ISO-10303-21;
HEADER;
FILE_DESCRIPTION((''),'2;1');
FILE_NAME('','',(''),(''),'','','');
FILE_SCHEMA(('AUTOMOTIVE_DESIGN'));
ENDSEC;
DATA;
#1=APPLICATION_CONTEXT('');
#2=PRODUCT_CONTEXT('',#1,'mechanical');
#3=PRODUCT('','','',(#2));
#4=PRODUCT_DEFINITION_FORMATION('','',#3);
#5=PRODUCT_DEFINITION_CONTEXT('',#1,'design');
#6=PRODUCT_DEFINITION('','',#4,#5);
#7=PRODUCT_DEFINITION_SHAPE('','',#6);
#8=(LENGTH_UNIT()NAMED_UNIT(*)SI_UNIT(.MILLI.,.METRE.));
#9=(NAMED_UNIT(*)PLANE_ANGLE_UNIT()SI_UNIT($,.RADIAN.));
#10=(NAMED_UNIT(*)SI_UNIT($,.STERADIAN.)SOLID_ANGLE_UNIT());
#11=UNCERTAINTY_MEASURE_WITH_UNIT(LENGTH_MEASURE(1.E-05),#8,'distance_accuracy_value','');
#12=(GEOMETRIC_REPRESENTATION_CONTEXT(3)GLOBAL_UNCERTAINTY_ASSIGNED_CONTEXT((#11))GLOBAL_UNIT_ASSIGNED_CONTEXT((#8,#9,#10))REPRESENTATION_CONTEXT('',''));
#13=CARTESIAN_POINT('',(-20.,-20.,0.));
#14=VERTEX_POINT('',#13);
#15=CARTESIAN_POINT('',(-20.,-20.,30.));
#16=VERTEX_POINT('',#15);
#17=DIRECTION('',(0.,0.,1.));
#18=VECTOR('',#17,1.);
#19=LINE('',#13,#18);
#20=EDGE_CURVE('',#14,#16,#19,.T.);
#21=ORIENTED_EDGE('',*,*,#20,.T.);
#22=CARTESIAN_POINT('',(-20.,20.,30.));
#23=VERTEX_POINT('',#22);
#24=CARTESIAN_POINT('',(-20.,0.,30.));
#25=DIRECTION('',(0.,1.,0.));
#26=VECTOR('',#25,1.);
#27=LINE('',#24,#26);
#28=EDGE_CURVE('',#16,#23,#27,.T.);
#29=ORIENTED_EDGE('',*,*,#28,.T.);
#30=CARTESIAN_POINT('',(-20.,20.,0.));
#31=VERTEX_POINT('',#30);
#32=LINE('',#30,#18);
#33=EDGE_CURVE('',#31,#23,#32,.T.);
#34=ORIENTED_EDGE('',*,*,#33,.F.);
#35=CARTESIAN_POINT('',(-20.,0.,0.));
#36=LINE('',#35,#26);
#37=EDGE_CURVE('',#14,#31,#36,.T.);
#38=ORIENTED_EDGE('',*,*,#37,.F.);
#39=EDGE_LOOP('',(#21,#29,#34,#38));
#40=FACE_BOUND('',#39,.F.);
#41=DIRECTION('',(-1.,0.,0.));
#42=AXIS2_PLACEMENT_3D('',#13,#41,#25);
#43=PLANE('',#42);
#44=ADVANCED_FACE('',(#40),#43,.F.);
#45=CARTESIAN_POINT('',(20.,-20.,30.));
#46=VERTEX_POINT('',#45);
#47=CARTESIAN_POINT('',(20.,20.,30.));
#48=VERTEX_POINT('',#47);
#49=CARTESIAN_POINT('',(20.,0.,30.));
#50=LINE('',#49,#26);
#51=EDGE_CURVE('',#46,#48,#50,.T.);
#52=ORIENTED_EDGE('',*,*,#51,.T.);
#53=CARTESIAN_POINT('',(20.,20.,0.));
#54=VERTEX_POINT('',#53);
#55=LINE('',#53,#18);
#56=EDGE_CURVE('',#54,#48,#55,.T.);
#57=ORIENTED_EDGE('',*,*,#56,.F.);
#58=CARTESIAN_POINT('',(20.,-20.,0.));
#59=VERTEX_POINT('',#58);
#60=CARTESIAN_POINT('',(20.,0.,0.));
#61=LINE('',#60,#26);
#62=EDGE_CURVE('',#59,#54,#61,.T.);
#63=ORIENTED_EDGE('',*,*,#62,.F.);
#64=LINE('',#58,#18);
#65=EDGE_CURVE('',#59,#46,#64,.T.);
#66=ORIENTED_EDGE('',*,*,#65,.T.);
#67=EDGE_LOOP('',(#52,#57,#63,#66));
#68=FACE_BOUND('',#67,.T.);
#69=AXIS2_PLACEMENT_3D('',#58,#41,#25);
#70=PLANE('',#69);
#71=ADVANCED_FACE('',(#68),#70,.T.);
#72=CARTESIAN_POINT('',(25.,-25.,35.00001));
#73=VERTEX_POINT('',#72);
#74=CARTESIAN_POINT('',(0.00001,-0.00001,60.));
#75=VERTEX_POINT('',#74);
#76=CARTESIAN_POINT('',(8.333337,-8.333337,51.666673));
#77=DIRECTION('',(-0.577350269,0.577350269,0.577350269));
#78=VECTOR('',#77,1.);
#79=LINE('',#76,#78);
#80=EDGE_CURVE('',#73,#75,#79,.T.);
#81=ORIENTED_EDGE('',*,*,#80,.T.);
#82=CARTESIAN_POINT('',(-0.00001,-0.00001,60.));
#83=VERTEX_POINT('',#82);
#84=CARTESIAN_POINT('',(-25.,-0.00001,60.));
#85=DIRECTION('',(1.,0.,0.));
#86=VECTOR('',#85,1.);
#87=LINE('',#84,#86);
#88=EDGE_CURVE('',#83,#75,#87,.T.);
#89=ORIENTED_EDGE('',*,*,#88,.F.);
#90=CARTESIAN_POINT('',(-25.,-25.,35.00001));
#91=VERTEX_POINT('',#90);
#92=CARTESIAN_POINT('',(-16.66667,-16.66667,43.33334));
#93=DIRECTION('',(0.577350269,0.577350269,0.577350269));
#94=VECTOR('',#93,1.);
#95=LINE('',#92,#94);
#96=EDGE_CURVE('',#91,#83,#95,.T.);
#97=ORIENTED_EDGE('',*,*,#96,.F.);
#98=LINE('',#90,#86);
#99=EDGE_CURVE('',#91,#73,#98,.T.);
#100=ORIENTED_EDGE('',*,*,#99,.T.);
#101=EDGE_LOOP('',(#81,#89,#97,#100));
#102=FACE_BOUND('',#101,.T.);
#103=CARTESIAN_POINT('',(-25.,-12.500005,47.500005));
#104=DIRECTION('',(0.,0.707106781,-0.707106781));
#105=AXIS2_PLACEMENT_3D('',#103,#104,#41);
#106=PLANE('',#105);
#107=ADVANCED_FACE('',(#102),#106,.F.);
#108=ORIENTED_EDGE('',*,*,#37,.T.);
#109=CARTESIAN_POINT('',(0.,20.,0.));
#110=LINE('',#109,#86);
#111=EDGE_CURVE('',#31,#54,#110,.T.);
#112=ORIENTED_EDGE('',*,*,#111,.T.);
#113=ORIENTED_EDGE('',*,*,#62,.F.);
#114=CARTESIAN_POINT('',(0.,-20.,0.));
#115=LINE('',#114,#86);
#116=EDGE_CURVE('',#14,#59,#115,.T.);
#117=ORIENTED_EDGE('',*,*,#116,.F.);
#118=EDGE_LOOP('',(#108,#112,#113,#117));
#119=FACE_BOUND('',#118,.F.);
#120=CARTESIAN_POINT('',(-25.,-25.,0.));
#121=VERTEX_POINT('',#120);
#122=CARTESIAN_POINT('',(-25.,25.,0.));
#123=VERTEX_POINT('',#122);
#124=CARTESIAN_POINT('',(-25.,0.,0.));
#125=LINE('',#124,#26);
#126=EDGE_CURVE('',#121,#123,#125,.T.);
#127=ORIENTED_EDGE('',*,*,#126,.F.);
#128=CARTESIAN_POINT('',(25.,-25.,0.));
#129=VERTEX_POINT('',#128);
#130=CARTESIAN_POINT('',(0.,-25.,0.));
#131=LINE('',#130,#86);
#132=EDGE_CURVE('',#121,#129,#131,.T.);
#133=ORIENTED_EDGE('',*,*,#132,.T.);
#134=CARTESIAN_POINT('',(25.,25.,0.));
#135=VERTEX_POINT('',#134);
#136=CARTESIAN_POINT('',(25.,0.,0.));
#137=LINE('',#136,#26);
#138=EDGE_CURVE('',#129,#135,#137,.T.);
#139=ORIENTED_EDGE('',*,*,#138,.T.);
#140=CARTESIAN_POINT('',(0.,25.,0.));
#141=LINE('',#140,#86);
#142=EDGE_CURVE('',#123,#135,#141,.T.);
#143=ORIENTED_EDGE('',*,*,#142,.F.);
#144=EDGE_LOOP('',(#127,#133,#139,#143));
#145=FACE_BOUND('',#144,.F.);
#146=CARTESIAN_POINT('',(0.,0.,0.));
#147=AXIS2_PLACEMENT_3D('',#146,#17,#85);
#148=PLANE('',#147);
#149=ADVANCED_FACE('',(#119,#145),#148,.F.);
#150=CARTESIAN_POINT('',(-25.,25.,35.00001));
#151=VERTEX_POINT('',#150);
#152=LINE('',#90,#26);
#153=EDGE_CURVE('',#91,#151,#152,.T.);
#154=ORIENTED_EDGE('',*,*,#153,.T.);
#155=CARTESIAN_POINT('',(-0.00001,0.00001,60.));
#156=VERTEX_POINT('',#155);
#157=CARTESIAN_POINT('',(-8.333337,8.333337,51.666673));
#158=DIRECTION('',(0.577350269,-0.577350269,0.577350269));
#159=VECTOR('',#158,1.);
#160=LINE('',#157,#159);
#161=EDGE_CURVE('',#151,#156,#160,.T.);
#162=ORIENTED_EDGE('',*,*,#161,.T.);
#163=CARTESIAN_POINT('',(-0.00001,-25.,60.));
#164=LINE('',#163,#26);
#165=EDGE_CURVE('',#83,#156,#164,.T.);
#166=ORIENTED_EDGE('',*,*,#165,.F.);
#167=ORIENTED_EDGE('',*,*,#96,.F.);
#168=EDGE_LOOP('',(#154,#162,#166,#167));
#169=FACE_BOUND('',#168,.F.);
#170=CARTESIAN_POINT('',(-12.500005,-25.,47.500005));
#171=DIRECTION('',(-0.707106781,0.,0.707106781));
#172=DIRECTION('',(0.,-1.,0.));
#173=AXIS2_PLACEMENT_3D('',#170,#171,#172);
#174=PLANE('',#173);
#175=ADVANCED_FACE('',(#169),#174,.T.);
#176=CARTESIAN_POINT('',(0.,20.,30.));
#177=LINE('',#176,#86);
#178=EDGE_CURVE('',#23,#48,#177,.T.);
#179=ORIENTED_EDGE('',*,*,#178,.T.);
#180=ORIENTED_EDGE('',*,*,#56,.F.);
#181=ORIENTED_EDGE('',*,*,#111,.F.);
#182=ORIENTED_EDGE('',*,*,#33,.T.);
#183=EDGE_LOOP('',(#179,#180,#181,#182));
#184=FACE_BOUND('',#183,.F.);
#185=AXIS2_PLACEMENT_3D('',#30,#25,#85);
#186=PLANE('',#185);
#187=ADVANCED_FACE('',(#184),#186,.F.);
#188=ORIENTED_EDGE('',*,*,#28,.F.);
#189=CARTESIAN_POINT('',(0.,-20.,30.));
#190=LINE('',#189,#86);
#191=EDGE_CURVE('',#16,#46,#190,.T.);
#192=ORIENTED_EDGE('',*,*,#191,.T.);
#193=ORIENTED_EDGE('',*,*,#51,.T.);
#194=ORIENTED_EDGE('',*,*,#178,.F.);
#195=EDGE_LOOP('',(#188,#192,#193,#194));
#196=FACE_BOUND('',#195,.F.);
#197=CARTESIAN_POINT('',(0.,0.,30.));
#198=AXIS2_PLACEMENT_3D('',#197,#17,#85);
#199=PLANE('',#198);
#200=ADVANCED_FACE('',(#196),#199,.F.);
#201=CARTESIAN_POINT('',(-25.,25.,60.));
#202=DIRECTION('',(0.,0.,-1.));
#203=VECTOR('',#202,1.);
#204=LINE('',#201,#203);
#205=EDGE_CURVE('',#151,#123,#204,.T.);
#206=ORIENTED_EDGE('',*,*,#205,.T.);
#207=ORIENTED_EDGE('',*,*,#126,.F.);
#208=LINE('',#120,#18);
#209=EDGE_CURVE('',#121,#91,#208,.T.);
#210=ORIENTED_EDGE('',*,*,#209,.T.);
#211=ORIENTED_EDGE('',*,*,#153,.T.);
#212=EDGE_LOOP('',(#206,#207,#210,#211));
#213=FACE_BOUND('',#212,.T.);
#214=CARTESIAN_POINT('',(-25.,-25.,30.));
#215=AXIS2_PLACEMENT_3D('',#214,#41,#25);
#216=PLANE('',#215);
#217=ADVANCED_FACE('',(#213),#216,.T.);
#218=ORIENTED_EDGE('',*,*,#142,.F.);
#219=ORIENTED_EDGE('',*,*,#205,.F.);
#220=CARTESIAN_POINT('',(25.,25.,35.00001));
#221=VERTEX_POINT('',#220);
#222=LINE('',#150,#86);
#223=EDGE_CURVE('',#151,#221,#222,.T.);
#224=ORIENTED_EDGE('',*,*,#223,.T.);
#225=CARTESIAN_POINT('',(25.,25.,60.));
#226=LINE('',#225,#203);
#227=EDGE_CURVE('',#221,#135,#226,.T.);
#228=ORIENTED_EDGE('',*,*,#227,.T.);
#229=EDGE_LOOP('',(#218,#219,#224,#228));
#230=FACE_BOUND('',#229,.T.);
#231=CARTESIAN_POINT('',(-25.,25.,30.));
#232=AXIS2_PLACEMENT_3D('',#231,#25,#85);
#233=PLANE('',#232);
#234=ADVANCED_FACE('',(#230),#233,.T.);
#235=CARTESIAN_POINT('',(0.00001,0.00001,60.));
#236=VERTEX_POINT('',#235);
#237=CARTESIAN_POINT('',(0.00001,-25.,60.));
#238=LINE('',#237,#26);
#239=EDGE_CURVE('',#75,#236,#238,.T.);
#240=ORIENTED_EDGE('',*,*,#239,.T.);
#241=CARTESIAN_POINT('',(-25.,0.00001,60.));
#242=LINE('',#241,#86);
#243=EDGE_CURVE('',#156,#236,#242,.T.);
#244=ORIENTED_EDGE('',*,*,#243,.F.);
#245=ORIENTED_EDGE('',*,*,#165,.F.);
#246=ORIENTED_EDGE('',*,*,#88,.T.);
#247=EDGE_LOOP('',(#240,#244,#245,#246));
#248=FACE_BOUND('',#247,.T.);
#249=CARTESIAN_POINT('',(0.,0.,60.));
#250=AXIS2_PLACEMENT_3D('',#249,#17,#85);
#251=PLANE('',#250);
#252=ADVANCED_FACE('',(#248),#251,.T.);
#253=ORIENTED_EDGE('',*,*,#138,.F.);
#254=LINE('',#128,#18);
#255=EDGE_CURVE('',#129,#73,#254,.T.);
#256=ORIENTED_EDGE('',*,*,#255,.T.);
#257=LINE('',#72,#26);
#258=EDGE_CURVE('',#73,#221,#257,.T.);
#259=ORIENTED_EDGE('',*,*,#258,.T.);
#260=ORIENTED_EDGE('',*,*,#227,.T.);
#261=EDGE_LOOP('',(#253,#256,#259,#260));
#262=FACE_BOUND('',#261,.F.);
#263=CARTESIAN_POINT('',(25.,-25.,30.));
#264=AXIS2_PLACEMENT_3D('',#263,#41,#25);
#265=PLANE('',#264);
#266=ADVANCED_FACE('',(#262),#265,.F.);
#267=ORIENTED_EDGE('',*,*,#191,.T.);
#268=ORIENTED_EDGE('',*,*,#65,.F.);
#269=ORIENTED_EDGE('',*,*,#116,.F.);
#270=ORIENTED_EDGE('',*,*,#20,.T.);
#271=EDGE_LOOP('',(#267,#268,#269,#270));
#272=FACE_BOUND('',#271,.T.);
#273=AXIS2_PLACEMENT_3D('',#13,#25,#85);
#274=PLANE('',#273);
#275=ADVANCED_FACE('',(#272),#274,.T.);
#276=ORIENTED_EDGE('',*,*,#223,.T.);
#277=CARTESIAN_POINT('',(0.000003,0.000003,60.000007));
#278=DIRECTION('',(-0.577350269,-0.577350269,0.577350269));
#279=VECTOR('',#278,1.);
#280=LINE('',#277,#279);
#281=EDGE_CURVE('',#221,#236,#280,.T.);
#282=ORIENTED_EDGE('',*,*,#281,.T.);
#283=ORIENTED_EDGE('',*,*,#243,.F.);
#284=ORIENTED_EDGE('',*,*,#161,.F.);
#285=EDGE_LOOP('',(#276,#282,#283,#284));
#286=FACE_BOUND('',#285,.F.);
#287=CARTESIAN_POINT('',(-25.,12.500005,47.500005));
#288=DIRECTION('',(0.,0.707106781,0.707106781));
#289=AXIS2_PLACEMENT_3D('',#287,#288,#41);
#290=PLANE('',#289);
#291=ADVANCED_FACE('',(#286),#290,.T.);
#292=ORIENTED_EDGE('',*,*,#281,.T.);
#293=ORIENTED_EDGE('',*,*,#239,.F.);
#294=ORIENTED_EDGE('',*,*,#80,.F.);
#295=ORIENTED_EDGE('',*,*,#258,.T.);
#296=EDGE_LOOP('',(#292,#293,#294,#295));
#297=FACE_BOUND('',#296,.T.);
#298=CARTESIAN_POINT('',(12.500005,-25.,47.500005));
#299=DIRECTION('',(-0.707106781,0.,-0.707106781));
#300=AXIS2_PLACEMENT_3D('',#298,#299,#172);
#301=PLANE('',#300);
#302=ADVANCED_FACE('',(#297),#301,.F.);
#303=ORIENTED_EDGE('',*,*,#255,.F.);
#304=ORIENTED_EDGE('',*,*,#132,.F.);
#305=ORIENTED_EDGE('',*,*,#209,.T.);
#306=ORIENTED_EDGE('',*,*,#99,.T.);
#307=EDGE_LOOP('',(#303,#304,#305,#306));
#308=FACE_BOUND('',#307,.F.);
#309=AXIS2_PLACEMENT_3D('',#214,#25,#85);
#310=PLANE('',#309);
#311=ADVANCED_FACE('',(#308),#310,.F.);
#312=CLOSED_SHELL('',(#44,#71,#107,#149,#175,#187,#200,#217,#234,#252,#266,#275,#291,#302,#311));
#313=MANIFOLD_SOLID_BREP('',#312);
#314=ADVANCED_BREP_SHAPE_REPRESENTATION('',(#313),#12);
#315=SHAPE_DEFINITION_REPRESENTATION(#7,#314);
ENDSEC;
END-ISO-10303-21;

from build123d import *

# Parameters (mm, degrees)
F0_R     = 381
F1_DEPTH = 762
F3_W     = 50
F3_H     = 50
F3_W_2   = 40
F3_H_2   = 40
F4_DEPTH = 30
F5_W     = 50
F5_H     = 50
F5_W_2   = 40
F5_H_2   = 40
F6_DEPTH = 30
F7_SIZE  = 24.99999


# Not quite as in the source:
# - a fillet or chamfer is up to 0.001 mm smaller than in the source, because OpenCascade refuses the exact size


with BuildPart() as f1:
    # F0 (on Top) → F1 (new body)
    with BuildSketch(Plane.XY):
        Circle(F0_R)
    extrude(amount=F1_DEPTH)


with BuildPart() as f4:
    # F3 (on Top) → F4 (new body)
    with BuildSketch(Plane.XY):
        Rectangle(F3_W, F3_H)
        Rectangle(F3_W_2, F3_H_2, mode=Mode.SUBTRACT)
    extrude(amount=F4_DEPTH)

    # F5 (on face) → F6 (join)
    with BuildSketch(Plane.XY.offset(30)):
        Rectangle(F5_W, F5_H)
        Rectangle(F5_W_2, F5_H_2, mode=Mode.SUBTRACT)
        Rectangle(F5_W_2, F5_H_2)
    extrude(amount=F6_DEPTH)

    # F7 (size 25 in the source; OpenCascade refuses exactly that, so slightly less here)
    f7_edges = [f4.edges().sort_by_distance(p)[0] for p in [
        (25, 0, 60),
        (0, 25, 60),
        (-25, 0, 60),
        (0, -25, 60),
    ]]
    chamfer(f7_edges, length=F7_SIZE)


solid = f4.part
